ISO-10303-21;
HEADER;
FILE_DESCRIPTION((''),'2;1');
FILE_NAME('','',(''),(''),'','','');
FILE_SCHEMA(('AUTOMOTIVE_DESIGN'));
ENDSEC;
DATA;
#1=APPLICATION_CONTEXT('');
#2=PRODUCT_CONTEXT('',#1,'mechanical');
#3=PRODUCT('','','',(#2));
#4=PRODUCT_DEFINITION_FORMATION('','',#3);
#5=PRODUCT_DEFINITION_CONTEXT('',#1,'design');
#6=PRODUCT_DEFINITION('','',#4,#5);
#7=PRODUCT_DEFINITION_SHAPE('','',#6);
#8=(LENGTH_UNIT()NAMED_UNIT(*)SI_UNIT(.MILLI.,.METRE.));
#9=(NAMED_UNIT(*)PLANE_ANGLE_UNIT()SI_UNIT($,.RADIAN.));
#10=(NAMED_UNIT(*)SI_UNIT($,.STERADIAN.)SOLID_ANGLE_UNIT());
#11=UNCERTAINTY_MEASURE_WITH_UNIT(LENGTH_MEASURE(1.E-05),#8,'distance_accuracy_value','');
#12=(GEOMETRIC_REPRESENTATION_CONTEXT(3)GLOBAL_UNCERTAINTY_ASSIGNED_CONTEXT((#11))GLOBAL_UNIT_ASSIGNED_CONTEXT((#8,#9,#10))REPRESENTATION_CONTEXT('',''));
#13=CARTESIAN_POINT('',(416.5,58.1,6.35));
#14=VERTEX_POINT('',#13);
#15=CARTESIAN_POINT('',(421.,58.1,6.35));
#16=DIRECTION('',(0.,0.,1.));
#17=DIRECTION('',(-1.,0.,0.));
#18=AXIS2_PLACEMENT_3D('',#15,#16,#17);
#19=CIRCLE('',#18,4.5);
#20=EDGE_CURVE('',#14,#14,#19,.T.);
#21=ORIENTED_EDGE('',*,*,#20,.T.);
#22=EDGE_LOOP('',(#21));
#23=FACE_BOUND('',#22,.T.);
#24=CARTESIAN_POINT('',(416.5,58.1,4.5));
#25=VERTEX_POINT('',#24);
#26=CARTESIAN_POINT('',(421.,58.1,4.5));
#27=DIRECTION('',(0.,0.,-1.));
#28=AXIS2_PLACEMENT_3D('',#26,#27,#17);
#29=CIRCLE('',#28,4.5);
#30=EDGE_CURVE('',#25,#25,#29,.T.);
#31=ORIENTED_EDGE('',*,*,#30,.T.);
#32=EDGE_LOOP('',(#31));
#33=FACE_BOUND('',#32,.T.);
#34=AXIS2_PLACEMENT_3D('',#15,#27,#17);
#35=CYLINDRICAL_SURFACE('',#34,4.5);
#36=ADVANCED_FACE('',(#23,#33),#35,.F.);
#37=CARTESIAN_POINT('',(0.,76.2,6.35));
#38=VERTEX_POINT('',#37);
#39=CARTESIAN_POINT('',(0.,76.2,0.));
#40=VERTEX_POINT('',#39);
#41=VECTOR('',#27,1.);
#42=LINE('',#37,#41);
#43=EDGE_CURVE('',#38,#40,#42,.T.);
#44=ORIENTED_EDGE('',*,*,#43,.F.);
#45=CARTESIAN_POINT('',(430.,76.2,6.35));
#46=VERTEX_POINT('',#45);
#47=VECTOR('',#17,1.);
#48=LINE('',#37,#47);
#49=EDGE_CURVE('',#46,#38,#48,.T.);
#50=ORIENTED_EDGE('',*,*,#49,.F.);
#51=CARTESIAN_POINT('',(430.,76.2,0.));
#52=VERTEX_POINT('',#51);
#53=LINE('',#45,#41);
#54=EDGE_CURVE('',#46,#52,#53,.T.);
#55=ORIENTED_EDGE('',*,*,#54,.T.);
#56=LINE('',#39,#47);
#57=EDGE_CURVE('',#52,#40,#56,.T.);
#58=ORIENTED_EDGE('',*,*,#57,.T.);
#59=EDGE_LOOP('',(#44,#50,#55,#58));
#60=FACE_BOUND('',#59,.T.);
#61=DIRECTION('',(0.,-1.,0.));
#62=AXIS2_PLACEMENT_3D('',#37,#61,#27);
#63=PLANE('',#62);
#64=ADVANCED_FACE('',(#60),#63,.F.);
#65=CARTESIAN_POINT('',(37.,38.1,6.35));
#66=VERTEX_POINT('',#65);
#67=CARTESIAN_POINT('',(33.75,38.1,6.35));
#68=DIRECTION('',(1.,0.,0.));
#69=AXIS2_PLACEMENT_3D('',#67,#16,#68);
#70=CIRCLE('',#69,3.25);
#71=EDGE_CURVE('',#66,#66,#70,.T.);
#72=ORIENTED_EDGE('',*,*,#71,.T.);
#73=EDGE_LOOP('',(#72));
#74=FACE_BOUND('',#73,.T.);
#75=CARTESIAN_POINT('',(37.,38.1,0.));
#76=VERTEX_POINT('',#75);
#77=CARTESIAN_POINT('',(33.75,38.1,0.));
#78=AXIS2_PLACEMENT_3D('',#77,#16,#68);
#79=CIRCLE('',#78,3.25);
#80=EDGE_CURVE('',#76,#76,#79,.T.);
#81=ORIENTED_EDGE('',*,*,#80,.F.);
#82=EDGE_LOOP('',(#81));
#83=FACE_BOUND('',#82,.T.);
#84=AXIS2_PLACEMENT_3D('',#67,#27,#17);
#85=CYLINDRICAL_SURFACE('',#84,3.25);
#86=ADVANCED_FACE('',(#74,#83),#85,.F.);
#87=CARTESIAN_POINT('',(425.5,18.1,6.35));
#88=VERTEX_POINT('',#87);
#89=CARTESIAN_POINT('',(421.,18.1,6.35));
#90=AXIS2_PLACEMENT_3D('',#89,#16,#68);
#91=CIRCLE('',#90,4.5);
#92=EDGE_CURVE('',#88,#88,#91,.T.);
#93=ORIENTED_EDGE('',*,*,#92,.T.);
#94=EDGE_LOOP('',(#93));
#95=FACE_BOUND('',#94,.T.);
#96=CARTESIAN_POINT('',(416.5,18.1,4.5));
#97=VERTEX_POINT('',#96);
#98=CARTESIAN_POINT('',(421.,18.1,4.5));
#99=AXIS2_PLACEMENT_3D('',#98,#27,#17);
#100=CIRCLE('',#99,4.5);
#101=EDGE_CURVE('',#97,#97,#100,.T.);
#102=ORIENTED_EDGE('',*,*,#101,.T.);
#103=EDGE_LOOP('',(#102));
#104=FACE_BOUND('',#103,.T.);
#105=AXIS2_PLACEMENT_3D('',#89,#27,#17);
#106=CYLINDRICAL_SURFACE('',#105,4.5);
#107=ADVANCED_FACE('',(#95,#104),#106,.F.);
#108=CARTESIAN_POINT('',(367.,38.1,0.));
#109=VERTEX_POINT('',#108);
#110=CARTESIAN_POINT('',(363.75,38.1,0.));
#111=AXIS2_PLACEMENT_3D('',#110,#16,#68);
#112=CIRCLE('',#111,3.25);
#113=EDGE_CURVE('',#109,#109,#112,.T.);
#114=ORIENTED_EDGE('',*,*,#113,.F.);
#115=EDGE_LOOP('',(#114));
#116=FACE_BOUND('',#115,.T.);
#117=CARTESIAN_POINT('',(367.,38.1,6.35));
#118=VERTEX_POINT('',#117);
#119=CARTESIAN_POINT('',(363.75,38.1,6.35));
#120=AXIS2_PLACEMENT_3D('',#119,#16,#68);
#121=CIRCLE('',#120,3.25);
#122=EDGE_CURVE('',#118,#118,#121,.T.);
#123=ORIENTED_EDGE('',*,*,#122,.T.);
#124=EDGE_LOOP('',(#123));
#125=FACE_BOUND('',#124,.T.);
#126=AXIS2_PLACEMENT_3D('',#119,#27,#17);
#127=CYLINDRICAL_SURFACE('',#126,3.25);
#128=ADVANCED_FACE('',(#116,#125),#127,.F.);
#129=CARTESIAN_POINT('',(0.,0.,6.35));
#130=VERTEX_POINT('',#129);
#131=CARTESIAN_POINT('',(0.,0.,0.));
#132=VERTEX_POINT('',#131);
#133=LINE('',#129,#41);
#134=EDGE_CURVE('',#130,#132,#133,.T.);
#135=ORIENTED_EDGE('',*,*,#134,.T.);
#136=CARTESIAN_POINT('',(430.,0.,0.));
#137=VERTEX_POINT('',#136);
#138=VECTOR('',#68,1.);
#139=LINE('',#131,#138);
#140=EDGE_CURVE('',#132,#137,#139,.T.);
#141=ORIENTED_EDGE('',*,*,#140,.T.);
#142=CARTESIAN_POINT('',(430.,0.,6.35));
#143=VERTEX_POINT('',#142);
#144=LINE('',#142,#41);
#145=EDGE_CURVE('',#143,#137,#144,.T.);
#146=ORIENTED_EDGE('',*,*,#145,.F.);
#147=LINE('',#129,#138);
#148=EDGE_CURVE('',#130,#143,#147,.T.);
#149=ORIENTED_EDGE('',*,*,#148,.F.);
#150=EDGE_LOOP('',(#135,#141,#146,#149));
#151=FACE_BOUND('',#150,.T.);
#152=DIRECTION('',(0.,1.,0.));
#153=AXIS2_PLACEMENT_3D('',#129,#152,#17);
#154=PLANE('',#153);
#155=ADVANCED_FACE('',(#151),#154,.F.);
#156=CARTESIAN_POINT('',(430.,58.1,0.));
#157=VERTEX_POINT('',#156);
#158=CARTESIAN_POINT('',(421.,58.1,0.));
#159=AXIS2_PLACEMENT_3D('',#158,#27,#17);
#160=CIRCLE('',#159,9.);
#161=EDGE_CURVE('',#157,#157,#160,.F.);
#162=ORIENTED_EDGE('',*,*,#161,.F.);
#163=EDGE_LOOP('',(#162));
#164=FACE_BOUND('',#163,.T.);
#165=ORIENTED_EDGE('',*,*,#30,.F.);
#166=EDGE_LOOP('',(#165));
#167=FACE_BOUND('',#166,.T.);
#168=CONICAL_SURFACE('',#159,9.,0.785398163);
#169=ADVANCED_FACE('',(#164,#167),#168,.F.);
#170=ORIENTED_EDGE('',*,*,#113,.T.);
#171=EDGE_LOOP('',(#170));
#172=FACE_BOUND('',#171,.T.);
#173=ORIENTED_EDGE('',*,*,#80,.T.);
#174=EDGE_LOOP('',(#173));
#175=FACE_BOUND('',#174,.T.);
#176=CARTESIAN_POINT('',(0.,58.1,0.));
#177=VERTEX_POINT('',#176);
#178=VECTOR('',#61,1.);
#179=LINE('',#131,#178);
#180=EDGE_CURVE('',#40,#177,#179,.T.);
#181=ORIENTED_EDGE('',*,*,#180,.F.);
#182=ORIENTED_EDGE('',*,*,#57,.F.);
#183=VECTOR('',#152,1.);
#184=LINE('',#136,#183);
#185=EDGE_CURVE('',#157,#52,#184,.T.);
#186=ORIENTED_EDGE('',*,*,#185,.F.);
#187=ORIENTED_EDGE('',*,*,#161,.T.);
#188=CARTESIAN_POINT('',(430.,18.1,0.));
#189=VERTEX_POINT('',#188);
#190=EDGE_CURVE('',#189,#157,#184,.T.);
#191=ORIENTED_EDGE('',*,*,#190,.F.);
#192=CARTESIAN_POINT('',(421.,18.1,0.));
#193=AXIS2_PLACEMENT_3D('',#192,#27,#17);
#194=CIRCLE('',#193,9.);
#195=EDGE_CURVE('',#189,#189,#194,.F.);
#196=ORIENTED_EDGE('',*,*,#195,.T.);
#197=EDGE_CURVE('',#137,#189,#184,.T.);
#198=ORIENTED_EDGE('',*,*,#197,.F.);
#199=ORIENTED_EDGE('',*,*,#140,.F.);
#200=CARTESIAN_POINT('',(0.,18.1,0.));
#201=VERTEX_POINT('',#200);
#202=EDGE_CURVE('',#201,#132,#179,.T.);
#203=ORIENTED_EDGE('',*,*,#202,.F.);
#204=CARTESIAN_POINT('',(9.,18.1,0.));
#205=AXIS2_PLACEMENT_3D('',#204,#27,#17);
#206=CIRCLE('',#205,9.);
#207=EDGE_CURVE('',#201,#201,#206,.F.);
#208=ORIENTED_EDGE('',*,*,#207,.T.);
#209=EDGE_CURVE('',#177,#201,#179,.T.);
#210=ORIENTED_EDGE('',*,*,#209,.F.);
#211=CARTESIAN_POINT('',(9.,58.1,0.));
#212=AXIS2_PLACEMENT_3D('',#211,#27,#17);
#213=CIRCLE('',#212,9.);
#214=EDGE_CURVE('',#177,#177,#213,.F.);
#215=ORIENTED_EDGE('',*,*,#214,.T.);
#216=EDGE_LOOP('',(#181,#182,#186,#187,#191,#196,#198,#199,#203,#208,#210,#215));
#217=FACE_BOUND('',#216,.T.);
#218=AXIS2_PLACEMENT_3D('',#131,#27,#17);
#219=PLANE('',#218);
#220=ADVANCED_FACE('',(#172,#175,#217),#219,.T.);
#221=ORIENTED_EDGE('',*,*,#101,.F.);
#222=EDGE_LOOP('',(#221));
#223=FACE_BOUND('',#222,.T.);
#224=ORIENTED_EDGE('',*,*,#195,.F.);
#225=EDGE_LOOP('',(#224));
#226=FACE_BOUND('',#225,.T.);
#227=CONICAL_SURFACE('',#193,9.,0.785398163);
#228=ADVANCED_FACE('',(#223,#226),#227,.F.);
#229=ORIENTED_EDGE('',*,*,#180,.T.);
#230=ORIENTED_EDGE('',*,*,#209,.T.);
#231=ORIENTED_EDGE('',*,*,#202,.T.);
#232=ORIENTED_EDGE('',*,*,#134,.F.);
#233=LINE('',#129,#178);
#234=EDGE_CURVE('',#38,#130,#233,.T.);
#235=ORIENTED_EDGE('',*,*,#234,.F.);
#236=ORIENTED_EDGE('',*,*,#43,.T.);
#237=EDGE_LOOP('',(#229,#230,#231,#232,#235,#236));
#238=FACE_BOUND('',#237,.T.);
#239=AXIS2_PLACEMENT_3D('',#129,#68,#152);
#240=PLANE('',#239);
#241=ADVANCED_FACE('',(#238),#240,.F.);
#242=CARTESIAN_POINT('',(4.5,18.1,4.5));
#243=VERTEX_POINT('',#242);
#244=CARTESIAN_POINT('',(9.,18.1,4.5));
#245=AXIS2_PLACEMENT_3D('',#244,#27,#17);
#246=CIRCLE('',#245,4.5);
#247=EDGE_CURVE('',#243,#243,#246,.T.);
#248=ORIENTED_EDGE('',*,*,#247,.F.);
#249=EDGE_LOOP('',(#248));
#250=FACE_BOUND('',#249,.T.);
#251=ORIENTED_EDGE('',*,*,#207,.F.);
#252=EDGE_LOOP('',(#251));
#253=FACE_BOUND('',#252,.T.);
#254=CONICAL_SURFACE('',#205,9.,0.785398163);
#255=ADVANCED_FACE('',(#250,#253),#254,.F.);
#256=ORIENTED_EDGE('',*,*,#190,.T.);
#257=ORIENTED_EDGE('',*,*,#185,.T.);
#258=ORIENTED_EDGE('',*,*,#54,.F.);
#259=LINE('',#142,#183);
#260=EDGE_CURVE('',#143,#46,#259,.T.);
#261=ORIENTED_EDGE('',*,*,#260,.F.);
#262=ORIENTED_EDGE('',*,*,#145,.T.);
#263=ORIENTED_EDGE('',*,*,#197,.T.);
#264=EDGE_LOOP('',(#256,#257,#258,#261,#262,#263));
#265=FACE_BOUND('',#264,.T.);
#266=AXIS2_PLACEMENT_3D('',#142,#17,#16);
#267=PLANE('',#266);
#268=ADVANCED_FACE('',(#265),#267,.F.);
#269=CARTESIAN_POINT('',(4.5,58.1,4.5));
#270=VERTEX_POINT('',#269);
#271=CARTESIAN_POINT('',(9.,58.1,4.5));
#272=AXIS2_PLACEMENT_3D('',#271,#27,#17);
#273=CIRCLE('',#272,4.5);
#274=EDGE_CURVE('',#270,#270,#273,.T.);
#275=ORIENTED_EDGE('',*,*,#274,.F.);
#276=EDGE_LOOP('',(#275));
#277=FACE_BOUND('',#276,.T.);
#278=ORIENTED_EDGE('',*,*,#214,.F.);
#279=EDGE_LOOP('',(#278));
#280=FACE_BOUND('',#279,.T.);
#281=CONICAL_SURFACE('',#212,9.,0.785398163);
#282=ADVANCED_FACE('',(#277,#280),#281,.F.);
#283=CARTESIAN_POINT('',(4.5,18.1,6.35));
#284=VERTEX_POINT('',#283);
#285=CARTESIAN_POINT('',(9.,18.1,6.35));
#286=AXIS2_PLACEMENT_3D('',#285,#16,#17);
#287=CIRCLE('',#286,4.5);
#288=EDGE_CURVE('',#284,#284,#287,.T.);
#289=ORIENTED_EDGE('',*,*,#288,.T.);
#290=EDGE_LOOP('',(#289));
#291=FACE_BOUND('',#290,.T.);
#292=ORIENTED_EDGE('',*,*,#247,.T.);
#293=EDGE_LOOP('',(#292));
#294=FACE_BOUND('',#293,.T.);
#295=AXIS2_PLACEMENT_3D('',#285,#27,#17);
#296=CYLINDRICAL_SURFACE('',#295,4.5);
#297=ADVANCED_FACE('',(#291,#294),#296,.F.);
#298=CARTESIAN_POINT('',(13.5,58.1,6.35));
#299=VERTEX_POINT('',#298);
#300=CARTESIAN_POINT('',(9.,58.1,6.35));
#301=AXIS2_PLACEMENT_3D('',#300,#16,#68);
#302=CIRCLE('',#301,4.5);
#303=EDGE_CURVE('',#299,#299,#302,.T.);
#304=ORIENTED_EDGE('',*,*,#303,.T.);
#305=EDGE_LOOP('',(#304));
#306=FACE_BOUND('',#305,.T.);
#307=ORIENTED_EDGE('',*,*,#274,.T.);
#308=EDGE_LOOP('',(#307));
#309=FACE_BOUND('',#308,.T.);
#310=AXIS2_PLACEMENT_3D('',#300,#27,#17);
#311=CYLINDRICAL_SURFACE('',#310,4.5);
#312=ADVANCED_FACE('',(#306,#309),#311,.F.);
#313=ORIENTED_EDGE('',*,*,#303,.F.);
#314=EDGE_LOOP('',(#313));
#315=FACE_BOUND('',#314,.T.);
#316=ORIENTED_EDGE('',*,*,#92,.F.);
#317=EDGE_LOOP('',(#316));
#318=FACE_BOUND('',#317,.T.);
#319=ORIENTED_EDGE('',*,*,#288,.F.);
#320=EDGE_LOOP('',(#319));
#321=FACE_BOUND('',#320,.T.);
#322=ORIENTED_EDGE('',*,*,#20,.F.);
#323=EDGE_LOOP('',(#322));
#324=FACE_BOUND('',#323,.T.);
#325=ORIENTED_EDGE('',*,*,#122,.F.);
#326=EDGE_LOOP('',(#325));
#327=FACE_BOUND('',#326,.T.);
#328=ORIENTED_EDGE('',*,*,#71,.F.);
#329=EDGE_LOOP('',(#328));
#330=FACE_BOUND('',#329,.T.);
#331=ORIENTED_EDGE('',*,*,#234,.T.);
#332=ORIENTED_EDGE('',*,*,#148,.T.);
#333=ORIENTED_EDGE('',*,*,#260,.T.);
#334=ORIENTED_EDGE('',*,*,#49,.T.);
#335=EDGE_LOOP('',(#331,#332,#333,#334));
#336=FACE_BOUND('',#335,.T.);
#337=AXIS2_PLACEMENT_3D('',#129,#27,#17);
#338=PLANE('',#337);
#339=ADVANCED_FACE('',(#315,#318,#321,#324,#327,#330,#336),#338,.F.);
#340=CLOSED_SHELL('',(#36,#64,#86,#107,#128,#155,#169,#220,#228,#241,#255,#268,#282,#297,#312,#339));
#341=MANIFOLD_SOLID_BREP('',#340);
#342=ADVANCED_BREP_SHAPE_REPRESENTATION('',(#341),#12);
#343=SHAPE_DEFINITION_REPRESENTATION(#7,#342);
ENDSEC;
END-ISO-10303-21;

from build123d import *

# Parameters (mm, degrees)
SKETCH1_W           = 430
SKETCH1_H           = 76.2
SKETCH1_R           = 4.5
SKETCH1_R_2         = 3.25
BOSS_EXTRUDE1_DEPTH = 6.35
CHAMFER1_SIZE       = 4.5


with BuildPart() as part:
    # Sketch1 → Boss-Extrude1 (new body)
    with BuildSketch(Plane.XY):
        with Locations((215, 38.1)):
            Rectangle(SKETCH1_W, SKETCH1_H)
        with Locations((9, 58.1)):
            Circle(SKETCH1_R, mode=Mode.SUBTRACT)
        with Locations(Location((9, 18.1, 0), (0, 0, 180))):
            Circle(SKETCH1_R, mode=Mode.SUBTRACT)
        with Locations((421, 18.1)):
            Circle(SKETCH1_R, mode=Mode.SUBTRACT)
        with Locations(Location((421, 58.1, 0), (0, 0, 180))):
            Circle(SKETCH1_R, mode=Mode.SUBTRACT)
        with Locations((33.75, 38.1)):
            Circle(SKETCH1_R_2, mode=Mode.SUBTRACT)
        with Locations((363.75, 38.1)):
            Circle(SKETCH1_R_2, mode=Mode.SUBTRACT)
    extrude(amount=BOSS_EXTRUDE1_DEPTH)

    # Chamfer1
    chamfer1_edges = [part.edges().sort_by_distance(p)[0] for p in [
        (4.5, 58.1, 0),
        (13.5, 18.1, 0),
        (416.5, 18.1, 0),
        (425.5, 58.1, 0),
    ]]
    chamfer(chamfer1_edges, length=CHAMFER1_SIZE - 0.0001)  # a hair under: the kernel refuses the full size


solid = part.part
